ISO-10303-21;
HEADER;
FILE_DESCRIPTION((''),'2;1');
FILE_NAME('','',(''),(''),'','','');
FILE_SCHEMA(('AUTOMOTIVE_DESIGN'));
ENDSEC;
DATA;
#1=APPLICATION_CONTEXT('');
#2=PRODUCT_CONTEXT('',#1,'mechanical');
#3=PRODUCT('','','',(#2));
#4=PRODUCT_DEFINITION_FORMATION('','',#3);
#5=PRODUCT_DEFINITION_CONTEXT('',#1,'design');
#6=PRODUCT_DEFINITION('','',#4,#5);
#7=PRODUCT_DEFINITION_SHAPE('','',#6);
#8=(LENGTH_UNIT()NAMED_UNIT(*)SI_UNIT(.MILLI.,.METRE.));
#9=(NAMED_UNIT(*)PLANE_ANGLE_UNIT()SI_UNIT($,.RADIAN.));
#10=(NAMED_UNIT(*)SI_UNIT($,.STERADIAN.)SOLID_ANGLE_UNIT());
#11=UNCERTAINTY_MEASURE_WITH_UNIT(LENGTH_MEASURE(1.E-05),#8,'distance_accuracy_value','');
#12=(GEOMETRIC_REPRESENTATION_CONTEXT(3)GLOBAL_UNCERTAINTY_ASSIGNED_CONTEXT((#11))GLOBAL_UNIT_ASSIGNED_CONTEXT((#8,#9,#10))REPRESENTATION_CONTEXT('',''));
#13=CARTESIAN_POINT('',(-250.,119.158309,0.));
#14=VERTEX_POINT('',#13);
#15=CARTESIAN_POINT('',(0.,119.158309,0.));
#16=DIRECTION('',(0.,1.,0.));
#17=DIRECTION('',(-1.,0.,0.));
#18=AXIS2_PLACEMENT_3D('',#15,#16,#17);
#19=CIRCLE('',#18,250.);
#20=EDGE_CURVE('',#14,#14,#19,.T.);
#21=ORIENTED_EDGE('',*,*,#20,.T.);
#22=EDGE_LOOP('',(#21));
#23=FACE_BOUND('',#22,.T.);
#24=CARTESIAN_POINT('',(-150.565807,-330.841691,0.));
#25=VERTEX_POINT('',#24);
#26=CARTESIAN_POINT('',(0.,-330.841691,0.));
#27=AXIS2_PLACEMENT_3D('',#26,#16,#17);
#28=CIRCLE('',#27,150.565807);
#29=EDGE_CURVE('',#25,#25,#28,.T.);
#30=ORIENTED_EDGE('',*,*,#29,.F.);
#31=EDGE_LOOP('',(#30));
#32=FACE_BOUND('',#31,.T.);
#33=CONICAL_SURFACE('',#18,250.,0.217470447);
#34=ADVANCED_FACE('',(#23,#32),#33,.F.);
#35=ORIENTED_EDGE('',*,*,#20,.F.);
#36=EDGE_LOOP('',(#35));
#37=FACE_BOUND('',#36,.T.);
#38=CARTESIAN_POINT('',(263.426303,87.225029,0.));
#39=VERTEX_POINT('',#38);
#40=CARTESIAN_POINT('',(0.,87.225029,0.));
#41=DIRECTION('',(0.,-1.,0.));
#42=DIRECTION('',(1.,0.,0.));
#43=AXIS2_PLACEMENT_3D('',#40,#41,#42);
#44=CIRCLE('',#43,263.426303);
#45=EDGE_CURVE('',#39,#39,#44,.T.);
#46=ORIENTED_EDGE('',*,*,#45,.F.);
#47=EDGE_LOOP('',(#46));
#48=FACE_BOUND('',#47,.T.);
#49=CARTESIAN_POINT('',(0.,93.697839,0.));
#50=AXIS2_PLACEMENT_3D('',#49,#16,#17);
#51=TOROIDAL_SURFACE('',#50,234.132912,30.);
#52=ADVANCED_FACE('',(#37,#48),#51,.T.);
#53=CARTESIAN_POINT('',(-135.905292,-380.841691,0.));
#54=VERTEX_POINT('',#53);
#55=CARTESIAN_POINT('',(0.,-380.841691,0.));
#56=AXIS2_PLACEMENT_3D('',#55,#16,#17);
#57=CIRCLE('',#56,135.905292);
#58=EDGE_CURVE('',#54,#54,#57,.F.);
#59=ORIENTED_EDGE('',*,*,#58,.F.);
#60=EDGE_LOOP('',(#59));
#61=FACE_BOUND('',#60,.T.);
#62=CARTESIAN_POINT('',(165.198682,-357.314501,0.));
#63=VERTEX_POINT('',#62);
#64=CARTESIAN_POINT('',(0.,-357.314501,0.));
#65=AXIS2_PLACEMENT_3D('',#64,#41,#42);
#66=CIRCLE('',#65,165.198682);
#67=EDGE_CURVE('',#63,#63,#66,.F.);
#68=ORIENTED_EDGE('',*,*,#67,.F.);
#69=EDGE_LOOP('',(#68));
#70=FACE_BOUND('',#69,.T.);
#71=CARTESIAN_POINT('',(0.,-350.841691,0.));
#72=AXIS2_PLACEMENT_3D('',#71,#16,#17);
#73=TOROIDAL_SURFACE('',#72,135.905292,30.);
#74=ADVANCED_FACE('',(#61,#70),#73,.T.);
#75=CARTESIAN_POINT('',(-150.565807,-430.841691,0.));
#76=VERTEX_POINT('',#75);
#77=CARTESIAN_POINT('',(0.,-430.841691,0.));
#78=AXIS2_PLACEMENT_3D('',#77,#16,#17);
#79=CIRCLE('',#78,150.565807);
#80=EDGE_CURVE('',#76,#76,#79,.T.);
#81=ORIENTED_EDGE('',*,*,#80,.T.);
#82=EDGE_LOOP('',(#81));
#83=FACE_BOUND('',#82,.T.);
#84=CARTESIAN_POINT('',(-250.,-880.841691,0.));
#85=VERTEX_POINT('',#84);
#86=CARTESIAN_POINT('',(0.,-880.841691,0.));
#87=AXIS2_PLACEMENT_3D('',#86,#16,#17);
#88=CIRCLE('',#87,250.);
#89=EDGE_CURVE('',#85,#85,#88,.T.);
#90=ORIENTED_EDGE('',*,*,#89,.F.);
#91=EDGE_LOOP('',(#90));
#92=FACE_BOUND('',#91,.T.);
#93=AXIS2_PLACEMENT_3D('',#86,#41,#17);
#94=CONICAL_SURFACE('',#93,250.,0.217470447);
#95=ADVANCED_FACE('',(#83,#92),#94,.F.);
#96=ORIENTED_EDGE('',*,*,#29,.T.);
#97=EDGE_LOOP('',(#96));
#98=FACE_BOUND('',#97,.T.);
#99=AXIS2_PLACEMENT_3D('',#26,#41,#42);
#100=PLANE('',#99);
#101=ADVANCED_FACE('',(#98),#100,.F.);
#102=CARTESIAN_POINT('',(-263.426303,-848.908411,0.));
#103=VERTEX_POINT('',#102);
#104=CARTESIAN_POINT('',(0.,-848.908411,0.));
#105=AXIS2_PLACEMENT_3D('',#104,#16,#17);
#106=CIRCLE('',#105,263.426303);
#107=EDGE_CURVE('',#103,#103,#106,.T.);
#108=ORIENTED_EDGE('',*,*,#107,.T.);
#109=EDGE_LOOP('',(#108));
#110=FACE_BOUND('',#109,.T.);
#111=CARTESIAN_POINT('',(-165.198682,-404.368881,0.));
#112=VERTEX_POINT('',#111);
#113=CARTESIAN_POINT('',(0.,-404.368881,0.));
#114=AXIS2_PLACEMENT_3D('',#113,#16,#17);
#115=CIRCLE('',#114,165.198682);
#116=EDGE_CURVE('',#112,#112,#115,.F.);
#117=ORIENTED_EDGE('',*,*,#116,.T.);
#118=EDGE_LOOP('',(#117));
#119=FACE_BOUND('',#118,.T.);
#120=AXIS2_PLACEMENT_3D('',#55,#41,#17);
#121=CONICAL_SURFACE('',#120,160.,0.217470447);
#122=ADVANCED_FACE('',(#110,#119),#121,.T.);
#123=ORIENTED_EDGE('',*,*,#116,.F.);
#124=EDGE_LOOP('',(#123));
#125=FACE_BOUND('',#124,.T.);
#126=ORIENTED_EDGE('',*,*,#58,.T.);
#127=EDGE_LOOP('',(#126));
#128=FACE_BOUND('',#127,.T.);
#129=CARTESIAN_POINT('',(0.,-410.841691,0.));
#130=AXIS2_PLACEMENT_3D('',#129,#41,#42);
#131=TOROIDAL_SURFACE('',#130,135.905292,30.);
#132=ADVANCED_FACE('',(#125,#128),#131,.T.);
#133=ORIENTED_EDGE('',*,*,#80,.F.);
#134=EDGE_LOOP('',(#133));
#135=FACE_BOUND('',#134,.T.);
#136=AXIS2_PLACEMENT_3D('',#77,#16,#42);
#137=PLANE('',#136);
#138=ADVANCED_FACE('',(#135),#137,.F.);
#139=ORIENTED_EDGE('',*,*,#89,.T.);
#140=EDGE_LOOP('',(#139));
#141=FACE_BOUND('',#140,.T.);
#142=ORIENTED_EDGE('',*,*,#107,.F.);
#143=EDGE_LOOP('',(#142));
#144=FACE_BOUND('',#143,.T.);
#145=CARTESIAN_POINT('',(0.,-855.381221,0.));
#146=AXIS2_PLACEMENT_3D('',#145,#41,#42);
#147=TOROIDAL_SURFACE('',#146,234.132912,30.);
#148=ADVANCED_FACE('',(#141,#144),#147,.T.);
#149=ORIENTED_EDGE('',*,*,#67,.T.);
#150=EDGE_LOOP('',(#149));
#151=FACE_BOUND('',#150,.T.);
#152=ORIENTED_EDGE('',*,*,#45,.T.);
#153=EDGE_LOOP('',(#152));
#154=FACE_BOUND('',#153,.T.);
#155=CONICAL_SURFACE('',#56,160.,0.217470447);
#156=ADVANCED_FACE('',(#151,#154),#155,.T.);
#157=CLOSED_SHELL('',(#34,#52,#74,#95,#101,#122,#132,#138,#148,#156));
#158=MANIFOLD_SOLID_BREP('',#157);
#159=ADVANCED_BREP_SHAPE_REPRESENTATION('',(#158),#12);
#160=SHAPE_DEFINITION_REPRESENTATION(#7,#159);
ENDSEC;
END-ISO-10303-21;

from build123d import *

# Parameters (mm, degrees)
FILLET1_R = 30


# Read off the part's stored shape, not the designer's step: Mirror1
with BuildPart() as part:
    # Sketch1 → Revolve1 (revolve)
    with BuildSketch(Plane.XY, mode=Mode.PRIVATE) as revolve1_sk:
        Polygon((0, -330.841690926), (0, -380.841690926), (160, -380.841690926), (270.482436132, 119.158309074), (250, 119.158309074), (150.565807481, -330.841690926), align=None)
    revolve(revolve1_sk.sketch.rotate(Axis((0, -330.841690926, 0), (0, -1, 0)), 180), axis=Axis((0, -330.841690926, 0), (0, -1, 0)))

    # Fillet1
    # the kernel refuses this fillet: 30 mm, written as the material it takes off along each edge
    with BuildSketch(Plane(origin=(0, -380.841690926, 0), x_dir=(-1, 0, 0), z_dir=(0, 0, 1))) as fillet1_piece_1:
        with BuildLine():
            CenterArc((160 - FILLET1_R * 0.803156934346, -FILLET1_R), FILLET1_R, 12.46013877, 77.53986123)
            Line((160 + FILLET1_R * 0.173289415634, -FILLET1_R * 0.784239657004), (160 + FILLET1_R * 0.192818342634, -FILLET1_R * 0.779924450144))
            Line((160 + FILLET1_R * 0.192818342634, -FILLET1_R * 0.779924450144), (160 + FILLET1_R * 0.0160631386869, FILLET1_R * 0.02))
            Line((160 + FILLET1_R * 0.0160631386869, FILLET1_R * 0.02), (160 - FILLET1_R * 0.803156934346, FILLET1_R * 0.02))
            Line((160 - FILLET1_R * 0.803156934346, FILLET1_R * 0.02), (160 - FILLET1_R * 0.803156934346, 0))
        make_face()
    revolve(axis=Axis((0, -380.841690926, 0), (0, -1, 0)), mode=Mode.SUBTRACT)
    with BuildSketch(Plane(origin=(0, 119.158309074, 0), x_dir=(-1, 0, 0), z_dir=(0, 0, 1))) as fillet1_piece_2:
        with BuildLine():
            CenterArc((234.132912434, 25.460469991), FILLET1_R, 301.931359404, 70.528779366)
            Line((250, 0), (250.317341751, -0.5092094))
            ThreePointArc((250.317341751, -0.5092094), (260.241218066, -0.6), (270.482436132, -0.6))
            Line((270.482436132, -0.6), (271.068303942, 0.129456206))
            Line((271.068303942, 0.129456206), (264.012170744, 32.062736487))
            Line((264.012170744, 32.062736487), (263.426302934, 31.933280281))
        make_face()
    revolve(axis=Axis((0, 119.158309074, 0), (0, -1, 0)), mode=Mode.SUBTRACT)

    # Mirror1 outline → Mirror1 (revolve)
    with BuildSketch(Plane.XY):
        with BuildLine():
            Line((0, -380.841690926), (0, -430.841690926))
            Line((0, -430.841690926), (150.565807481, -430.841690926))
            Line((150.565807481, -430.841690926), (250, -880.841690926))
            ThreePointArc((250, -880.841690926), (261.787944384, -867.008740354), (263.426302934, -848.908410644))
            Line((263.426302934, -848.908410644), (165.198682469, -404.368880636))
            ThreePointArc((165.198682469, -404.368880636), (154.691133597, -387.451689764), (135.90529197, -380.841690926))
            Line((135.90529197, -380.841690926), (0, -380.841690926))
        make_face()
    revolve(axis=Axis((0, 0, 0), (0, 1, 0)))


solid = part.part
